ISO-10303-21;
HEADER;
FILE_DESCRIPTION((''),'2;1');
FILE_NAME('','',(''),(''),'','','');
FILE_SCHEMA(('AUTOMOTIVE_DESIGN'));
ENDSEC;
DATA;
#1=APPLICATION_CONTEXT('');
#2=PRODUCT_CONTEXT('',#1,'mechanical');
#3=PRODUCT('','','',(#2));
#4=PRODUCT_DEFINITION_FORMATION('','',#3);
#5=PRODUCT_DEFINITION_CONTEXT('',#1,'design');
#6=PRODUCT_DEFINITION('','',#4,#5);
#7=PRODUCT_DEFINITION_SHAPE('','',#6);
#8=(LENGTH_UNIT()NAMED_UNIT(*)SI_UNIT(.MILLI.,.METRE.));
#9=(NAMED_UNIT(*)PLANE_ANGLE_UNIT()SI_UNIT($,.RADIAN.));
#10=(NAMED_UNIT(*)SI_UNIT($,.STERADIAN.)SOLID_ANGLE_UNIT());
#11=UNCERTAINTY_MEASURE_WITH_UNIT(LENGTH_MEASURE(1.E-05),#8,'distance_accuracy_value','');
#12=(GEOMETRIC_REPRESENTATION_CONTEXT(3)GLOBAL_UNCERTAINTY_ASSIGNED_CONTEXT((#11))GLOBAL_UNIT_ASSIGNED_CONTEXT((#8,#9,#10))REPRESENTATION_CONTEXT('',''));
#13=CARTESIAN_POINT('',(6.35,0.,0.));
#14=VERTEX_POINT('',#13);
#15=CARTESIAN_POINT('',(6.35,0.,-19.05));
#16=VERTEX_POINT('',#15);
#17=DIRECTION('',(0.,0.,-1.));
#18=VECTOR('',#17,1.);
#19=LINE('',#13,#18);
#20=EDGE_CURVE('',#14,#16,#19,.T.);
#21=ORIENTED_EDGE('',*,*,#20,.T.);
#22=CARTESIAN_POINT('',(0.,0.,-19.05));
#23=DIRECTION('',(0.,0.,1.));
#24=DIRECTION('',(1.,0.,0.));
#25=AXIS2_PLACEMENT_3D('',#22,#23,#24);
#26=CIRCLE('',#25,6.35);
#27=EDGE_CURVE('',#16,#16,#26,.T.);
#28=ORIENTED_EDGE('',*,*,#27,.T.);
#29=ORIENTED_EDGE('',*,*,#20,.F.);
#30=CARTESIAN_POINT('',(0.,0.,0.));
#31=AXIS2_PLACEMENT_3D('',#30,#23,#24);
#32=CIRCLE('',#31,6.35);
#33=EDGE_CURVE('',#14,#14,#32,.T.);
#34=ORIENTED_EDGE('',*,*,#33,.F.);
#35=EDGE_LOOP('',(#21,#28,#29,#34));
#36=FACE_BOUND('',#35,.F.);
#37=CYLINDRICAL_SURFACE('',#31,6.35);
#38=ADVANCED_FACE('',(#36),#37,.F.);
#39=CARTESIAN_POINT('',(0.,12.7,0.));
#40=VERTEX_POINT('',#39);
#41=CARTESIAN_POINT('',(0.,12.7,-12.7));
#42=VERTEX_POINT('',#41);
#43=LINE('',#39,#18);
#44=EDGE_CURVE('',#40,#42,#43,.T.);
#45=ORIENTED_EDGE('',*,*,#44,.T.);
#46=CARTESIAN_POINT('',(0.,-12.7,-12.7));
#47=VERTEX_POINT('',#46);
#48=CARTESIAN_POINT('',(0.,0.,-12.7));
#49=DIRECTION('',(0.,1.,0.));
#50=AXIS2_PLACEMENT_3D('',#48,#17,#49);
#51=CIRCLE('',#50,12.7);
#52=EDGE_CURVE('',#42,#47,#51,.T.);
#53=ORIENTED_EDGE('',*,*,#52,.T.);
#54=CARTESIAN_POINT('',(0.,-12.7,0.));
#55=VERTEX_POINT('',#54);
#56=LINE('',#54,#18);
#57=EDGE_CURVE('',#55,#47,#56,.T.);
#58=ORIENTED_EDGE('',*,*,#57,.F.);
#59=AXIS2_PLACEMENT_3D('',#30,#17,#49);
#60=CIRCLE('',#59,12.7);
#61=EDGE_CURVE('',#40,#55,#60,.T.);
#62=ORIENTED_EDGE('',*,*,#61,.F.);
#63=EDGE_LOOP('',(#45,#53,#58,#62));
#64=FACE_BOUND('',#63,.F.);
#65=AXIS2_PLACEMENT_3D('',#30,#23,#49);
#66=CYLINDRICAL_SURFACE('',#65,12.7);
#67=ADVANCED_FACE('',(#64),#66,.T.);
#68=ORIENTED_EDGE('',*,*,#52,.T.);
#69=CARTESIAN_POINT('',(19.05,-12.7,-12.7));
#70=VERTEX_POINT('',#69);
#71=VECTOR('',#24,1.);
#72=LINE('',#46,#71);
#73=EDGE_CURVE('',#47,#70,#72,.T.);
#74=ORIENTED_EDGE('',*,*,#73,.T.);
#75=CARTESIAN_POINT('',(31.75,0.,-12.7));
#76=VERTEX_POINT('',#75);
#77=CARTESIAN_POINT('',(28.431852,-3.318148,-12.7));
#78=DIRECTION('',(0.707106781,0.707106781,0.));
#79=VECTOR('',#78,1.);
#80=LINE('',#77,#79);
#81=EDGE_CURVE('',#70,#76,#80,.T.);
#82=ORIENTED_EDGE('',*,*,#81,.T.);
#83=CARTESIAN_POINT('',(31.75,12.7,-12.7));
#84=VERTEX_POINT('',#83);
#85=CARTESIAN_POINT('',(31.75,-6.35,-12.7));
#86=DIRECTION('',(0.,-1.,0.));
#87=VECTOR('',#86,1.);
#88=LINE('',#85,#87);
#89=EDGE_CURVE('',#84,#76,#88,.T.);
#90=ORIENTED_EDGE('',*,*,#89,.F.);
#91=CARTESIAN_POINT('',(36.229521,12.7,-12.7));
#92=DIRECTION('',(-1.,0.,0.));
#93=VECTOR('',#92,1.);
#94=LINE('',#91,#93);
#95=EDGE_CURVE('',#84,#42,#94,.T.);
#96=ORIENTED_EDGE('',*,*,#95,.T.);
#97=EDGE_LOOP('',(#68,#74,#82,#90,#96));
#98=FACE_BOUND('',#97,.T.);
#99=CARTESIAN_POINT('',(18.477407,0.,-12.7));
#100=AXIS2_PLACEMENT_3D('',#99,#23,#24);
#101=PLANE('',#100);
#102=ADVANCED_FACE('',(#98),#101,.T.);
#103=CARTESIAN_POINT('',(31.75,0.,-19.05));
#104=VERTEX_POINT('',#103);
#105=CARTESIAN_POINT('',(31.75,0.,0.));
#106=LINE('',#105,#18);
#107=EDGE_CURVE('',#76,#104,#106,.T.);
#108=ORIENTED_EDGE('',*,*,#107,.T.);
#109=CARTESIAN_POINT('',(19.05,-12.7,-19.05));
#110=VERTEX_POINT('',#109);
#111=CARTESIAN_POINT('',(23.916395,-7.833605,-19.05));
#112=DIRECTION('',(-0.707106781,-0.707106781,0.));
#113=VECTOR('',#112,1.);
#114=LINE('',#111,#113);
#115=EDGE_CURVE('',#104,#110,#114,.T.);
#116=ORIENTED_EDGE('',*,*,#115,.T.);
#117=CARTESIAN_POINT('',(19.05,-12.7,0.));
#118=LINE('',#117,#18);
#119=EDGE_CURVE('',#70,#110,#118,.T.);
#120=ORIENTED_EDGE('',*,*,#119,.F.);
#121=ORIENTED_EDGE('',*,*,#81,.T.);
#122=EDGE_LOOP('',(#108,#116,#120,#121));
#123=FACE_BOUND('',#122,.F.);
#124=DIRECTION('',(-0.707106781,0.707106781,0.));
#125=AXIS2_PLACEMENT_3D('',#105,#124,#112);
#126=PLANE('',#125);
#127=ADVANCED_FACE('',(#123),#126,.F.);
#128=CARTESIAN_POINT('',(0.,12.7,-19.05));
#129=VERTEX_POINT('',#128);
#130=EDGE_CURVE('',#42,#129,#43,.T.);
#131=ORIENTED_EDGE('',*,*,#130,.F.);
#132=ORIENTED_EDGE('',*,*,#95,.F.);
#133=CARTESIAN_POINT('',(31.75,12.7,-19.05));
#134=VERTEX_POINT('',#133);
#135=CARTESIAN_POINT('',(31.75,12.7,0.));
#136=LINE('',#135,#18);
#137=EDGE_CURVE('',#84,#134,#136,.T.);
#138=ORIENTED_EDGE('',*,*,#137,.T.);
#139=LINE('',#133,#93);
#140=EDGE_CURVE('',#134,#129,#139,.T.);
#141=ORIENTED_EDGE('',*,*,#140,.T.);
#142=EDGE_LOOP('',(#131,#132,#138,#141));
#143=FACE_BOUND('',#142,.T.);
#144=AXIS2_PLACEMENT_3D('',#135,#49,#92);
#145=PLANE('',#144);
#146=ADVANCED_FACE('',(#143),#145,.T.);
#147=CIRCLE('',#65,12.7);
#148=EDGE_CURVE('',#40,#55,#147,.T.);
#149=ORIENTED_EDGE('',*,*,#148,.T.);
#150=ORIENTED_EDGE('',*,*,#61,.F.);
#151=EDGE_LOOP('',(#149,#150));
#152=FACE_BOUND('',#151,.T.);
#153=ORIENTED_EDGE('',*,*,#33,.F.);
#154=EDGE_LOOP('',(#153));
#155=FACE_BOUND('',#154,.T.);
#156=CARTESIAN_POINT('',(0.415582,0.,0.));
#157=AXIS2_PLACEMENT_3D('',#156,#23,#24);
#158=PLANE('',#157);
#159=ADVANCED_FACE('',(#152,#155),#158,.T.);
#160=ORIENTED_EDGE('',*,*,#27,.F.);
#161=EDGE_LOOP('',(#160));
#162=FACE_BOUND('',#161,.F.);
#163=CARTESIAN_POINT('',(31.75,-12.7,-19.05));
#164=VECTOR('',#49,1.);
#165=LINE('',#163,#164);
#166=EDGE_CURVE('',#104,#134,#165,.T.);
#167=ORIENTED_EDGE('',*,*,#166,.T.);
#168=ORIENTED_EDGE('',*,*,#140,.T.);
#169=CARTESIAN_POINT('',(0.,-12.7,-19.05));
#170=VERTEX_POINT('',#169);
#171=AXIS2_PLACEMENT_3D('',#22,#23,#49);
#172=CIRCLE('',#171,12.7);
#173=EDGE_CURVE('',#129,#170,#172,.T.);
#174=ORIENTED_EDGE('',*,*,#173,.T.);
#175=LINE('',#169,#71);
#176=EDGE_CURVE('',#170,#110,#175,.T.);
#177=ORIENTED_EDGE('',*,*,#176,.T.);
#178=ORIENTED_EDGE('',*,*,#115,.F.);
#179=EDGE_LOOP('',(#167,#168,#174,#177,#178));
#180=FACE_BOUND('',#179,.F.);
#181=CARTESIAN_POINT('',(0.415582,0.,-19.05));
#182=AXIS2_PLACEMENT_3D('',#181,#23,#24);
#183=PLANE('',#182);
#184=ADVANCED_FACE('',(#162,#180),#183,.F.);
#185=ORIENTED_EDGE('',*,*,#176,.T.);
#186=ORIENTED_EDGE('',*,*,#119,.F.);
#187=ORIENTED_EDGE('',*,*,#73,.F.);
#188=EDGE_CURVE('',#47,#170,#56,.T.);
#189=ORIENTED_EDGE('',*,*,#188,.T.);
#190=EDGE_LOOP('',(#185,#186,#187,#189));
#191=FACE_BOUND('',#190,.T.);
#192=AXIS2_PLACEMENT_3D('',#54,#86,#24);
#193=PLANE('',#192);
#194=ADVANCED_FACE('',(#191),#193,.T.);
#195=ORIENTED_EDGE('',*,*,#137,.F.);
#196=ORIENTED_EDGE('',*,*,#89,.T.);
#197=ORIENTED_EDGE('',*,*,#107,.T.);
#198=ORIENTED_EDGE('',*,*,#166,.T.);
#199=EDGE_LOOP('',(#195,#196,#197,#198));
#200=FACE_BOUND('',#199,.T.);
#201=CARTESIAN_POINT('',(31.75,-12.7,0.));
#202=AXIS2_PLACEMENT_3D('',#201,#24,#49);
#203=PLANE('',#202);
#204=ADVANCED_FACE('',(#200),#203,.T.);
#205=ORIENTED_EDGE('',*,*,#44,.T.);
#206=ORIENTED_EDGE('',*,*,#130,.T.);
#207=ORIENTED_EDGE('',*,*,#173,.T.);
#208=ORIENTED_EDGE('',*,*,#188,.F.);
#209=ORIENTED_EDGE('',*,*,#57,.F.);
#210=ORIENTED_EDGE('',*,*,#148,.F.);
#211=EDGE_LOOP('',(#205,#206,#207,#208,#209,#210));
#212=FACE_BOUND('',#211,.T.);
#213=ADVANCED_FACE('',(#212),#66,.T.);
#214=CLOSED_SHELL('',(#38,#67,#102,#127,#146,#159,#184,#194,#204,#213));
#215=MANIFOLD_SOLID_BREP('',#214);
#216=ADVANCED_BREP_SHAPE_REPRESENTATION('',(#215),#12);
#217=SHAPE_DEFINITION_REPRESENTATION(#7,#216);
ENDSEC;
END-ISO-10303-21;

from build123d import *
from build123d import SkipClean  # not in build123d's __all__

# Parameters (mm, degrees)
F1_DEPTH = 19.05
F3_DEPTH = 25.4
F4_R     = 6.35
F5_DEPTH = 25.4
F7_DEPTH = 12.7


with BuildPart() as f1:
    # F0 (on Top) → F1 (new body)
    with BuildSketch(Plane.XY):
        with BuildLine():
            ThreePointArc((0, -12.7), (8.9802561211, -8.9802561211), (12.7, 0))
            ThreePointArc((12.7, 0), (8.9802561211, 8.9802561211), (0, 12.7))
            ThreePointArc((0, 12.7), (-12.7, 0), (0, -12.7))
        make_face()
        with BuildLine():
            ThreePointArc((0, 12.7), (8.9802561211, 8.9802561211), (12.7, 0))
            ThreePointArc((12.7, 0), (8.9802561211, -8.9802561211), (0, -12.7))
            Line((0, -12.7), (31.75, -12.7))
            Line((31.75, -12.7), (31.75, 12.7))
            Line((31.75, 12.7), (0, 12.7))
        make_face()
    extrude(amount=-F1_DEPTH)

    # F2 (on Top) → F3 (cut)
    with BuildSketch(Plane.XY):
        Polygon((31.75, 0), (19.05, -12.7), (31.75, -12.7), align=None)
    extrude(amount=-F3_DEPTH, mode=Mode.SUBTRACT)

    # F4 (on Top) → F5 (cut)
    with BuildSketch(Plane.XY):
        Circle(F4_R)
    extrude(amount=-F5_DEPTH, mode=Mode.SUBTRACT)

    # F6 (on Top) → F7 (cut)
    with BuildSketch(Plane.XY):
        with BuildLine():
            Line((36.2295210361, 12.7), (0, 12.7))
            ThreePointArc((0, 12.7), (12.7, 0), (0, -12.7))
            Line((0, -12.7), (36.2295210361, -12.7))
            Line((36.2295210361, -12.7), (36.2295210361, 12.7))
        make_face()
    with SkipClean():  # cleaning this boolean's faces spoils the solid; the shape is the same uncleaned
        extrude(amount=-F7_DEPTH, mode=Mode.SUBTRACT)


solid = f1.part
